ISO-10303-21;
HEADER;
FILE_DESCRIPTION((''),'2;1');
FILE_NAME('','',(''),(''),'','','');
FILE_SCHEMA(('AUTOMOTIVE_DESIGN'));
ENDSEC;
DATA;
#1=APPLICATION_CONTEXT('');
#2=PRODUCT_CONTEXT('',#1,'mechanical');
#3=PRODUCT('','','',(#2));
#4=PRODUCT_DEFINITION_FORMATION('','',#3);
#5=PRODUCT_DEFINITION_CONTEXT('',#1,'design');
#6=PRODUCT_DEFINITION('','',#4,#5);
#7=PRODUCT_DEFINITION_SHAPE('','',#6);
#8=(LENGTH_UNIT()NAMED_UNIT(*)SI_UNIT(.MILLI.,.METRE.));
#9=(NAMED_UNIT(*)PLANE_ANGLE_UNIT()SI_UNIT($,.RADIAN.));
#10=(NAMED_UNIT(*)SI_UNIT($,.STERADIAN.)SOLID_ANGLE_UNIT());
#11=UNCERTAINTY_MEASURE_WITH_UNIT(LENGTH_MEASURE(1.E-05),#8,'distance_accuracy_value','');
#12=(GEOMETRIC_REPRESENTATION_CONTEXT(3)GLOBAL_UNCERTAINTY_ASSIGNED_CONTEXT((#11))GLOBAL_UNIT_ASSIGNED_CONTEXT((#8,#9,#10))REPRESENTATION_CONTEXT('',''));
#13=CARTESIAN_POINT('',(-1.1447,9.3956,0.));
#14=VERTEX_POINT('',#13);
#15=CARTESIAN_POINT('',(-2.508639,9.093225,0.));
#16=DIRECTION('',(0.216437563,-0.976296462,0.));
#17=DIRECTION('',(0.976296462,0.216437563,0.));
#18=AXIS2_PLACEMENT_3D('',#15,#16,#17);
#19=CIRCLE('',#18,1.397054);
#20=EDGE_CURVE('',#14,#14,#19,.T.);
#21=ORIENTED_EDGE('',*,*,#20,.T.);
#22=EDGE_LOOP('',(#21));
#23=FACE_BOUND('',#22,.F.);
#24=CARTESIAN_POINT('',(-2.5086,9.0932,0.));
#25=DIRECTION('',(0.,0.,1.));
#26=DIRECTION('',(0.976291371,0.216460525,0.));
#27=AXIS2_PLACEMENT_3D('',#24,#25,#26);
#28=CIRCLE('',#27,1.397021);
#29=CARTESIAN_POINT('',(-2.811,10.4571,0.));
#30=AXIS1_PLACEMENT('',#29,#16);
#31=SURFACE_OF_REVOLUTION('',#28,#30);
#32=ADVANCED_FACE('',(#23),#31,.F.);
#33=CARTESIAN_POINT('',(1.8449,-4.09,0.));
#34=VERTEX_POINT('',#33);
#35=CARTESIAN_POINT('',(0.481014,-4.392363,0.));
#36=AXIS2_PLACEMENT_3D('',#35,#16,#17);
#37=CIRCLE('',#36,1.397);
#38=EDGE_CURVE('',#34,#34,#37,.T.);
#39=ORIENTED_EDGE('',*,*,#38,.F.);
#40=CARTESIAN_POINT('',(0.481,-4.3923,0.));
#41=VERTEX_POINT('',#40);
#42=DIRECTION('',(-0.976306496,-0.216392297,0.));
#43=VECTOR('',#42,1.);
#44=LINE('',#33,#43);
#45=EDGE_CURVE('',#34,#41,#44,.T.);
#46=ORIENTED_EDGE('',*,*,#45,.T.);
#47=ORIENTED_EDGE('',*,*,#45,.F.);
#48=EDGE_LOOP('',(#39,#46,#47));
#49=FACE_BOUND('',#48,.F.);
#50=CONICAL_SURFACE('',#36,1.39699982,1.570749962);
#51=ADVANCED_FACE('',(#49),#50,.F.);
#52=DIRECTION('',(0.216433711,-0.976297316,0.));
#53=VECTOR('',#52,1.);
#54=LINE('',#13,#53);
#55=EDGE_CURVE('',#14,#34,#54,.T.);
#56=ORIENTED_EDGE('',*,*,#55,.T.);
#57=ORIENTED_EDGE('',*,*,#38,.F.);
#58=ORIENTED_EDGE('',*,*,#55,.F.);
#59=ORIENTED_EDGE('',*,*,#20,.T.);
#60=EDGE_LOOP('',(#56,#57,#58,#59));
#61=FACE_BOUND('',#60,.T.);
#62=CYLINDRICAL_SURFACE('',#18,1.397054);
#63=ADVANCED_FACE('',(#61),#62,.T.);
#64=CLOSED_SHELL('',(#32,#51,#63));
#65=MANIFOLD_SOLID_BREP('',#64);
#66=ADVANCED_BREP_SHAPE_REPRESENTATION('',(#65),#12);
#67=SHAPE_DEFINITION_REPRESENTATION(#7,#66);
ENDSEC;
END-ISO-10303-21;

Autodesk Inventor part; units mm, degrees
sketch "Sketch_1" plane through (0, 0, 0) normal (0, 0, 1) x (1, 0, 0)
  line L0 (0.481, -4.3923) -> (-2.811, 10.4571)
  arc A0 (-1.1447, 9.3956) -> (-2.811, 10.4571) centre (-2.5086, 9.0932) ccw
  line L1 (-1.1447, 9.3956) -> (1.8449, -4.09)
  line L2 (1.8449, -4.09) -> (0.481, -4.3923)
  line L3 (0.481, -4.3923) -> (-2.811, 10.4571)
revolve "Revolution1" add sketch "Sketch_1" angle 360 about axis through (0.481, -4.3923, 0) along (0.2164396, -0.976296, 0)
ref_plane "rot_XY" through (0, -2.2225, 0) normal (0, 0, 1) x (1, 0, 0)
ref_plane "rot_YZ" through (0, -2.2225, 0) normal (1, 0, 0) x (0, 1, 0)
ref_plane "rot_ZX" through (0, -2.2225, 0) normal (0, 1, 0) x (0, 0, 1)
ref_plane "to_cap_XY" through (0, -2.2225, 0) normal (0, 1, 0) x (1, 0, 0)
ref_plane "to_cap_YZ" through (0, -2.2225, 0) normal (1, 0, 0) x (0, 0, -1)
ref_plane "to_cap_ZX" through (0, -2.2225, 0) normal (0, 0, -1) x (0, 1, 0)
properties part number "M20S-toggles"
